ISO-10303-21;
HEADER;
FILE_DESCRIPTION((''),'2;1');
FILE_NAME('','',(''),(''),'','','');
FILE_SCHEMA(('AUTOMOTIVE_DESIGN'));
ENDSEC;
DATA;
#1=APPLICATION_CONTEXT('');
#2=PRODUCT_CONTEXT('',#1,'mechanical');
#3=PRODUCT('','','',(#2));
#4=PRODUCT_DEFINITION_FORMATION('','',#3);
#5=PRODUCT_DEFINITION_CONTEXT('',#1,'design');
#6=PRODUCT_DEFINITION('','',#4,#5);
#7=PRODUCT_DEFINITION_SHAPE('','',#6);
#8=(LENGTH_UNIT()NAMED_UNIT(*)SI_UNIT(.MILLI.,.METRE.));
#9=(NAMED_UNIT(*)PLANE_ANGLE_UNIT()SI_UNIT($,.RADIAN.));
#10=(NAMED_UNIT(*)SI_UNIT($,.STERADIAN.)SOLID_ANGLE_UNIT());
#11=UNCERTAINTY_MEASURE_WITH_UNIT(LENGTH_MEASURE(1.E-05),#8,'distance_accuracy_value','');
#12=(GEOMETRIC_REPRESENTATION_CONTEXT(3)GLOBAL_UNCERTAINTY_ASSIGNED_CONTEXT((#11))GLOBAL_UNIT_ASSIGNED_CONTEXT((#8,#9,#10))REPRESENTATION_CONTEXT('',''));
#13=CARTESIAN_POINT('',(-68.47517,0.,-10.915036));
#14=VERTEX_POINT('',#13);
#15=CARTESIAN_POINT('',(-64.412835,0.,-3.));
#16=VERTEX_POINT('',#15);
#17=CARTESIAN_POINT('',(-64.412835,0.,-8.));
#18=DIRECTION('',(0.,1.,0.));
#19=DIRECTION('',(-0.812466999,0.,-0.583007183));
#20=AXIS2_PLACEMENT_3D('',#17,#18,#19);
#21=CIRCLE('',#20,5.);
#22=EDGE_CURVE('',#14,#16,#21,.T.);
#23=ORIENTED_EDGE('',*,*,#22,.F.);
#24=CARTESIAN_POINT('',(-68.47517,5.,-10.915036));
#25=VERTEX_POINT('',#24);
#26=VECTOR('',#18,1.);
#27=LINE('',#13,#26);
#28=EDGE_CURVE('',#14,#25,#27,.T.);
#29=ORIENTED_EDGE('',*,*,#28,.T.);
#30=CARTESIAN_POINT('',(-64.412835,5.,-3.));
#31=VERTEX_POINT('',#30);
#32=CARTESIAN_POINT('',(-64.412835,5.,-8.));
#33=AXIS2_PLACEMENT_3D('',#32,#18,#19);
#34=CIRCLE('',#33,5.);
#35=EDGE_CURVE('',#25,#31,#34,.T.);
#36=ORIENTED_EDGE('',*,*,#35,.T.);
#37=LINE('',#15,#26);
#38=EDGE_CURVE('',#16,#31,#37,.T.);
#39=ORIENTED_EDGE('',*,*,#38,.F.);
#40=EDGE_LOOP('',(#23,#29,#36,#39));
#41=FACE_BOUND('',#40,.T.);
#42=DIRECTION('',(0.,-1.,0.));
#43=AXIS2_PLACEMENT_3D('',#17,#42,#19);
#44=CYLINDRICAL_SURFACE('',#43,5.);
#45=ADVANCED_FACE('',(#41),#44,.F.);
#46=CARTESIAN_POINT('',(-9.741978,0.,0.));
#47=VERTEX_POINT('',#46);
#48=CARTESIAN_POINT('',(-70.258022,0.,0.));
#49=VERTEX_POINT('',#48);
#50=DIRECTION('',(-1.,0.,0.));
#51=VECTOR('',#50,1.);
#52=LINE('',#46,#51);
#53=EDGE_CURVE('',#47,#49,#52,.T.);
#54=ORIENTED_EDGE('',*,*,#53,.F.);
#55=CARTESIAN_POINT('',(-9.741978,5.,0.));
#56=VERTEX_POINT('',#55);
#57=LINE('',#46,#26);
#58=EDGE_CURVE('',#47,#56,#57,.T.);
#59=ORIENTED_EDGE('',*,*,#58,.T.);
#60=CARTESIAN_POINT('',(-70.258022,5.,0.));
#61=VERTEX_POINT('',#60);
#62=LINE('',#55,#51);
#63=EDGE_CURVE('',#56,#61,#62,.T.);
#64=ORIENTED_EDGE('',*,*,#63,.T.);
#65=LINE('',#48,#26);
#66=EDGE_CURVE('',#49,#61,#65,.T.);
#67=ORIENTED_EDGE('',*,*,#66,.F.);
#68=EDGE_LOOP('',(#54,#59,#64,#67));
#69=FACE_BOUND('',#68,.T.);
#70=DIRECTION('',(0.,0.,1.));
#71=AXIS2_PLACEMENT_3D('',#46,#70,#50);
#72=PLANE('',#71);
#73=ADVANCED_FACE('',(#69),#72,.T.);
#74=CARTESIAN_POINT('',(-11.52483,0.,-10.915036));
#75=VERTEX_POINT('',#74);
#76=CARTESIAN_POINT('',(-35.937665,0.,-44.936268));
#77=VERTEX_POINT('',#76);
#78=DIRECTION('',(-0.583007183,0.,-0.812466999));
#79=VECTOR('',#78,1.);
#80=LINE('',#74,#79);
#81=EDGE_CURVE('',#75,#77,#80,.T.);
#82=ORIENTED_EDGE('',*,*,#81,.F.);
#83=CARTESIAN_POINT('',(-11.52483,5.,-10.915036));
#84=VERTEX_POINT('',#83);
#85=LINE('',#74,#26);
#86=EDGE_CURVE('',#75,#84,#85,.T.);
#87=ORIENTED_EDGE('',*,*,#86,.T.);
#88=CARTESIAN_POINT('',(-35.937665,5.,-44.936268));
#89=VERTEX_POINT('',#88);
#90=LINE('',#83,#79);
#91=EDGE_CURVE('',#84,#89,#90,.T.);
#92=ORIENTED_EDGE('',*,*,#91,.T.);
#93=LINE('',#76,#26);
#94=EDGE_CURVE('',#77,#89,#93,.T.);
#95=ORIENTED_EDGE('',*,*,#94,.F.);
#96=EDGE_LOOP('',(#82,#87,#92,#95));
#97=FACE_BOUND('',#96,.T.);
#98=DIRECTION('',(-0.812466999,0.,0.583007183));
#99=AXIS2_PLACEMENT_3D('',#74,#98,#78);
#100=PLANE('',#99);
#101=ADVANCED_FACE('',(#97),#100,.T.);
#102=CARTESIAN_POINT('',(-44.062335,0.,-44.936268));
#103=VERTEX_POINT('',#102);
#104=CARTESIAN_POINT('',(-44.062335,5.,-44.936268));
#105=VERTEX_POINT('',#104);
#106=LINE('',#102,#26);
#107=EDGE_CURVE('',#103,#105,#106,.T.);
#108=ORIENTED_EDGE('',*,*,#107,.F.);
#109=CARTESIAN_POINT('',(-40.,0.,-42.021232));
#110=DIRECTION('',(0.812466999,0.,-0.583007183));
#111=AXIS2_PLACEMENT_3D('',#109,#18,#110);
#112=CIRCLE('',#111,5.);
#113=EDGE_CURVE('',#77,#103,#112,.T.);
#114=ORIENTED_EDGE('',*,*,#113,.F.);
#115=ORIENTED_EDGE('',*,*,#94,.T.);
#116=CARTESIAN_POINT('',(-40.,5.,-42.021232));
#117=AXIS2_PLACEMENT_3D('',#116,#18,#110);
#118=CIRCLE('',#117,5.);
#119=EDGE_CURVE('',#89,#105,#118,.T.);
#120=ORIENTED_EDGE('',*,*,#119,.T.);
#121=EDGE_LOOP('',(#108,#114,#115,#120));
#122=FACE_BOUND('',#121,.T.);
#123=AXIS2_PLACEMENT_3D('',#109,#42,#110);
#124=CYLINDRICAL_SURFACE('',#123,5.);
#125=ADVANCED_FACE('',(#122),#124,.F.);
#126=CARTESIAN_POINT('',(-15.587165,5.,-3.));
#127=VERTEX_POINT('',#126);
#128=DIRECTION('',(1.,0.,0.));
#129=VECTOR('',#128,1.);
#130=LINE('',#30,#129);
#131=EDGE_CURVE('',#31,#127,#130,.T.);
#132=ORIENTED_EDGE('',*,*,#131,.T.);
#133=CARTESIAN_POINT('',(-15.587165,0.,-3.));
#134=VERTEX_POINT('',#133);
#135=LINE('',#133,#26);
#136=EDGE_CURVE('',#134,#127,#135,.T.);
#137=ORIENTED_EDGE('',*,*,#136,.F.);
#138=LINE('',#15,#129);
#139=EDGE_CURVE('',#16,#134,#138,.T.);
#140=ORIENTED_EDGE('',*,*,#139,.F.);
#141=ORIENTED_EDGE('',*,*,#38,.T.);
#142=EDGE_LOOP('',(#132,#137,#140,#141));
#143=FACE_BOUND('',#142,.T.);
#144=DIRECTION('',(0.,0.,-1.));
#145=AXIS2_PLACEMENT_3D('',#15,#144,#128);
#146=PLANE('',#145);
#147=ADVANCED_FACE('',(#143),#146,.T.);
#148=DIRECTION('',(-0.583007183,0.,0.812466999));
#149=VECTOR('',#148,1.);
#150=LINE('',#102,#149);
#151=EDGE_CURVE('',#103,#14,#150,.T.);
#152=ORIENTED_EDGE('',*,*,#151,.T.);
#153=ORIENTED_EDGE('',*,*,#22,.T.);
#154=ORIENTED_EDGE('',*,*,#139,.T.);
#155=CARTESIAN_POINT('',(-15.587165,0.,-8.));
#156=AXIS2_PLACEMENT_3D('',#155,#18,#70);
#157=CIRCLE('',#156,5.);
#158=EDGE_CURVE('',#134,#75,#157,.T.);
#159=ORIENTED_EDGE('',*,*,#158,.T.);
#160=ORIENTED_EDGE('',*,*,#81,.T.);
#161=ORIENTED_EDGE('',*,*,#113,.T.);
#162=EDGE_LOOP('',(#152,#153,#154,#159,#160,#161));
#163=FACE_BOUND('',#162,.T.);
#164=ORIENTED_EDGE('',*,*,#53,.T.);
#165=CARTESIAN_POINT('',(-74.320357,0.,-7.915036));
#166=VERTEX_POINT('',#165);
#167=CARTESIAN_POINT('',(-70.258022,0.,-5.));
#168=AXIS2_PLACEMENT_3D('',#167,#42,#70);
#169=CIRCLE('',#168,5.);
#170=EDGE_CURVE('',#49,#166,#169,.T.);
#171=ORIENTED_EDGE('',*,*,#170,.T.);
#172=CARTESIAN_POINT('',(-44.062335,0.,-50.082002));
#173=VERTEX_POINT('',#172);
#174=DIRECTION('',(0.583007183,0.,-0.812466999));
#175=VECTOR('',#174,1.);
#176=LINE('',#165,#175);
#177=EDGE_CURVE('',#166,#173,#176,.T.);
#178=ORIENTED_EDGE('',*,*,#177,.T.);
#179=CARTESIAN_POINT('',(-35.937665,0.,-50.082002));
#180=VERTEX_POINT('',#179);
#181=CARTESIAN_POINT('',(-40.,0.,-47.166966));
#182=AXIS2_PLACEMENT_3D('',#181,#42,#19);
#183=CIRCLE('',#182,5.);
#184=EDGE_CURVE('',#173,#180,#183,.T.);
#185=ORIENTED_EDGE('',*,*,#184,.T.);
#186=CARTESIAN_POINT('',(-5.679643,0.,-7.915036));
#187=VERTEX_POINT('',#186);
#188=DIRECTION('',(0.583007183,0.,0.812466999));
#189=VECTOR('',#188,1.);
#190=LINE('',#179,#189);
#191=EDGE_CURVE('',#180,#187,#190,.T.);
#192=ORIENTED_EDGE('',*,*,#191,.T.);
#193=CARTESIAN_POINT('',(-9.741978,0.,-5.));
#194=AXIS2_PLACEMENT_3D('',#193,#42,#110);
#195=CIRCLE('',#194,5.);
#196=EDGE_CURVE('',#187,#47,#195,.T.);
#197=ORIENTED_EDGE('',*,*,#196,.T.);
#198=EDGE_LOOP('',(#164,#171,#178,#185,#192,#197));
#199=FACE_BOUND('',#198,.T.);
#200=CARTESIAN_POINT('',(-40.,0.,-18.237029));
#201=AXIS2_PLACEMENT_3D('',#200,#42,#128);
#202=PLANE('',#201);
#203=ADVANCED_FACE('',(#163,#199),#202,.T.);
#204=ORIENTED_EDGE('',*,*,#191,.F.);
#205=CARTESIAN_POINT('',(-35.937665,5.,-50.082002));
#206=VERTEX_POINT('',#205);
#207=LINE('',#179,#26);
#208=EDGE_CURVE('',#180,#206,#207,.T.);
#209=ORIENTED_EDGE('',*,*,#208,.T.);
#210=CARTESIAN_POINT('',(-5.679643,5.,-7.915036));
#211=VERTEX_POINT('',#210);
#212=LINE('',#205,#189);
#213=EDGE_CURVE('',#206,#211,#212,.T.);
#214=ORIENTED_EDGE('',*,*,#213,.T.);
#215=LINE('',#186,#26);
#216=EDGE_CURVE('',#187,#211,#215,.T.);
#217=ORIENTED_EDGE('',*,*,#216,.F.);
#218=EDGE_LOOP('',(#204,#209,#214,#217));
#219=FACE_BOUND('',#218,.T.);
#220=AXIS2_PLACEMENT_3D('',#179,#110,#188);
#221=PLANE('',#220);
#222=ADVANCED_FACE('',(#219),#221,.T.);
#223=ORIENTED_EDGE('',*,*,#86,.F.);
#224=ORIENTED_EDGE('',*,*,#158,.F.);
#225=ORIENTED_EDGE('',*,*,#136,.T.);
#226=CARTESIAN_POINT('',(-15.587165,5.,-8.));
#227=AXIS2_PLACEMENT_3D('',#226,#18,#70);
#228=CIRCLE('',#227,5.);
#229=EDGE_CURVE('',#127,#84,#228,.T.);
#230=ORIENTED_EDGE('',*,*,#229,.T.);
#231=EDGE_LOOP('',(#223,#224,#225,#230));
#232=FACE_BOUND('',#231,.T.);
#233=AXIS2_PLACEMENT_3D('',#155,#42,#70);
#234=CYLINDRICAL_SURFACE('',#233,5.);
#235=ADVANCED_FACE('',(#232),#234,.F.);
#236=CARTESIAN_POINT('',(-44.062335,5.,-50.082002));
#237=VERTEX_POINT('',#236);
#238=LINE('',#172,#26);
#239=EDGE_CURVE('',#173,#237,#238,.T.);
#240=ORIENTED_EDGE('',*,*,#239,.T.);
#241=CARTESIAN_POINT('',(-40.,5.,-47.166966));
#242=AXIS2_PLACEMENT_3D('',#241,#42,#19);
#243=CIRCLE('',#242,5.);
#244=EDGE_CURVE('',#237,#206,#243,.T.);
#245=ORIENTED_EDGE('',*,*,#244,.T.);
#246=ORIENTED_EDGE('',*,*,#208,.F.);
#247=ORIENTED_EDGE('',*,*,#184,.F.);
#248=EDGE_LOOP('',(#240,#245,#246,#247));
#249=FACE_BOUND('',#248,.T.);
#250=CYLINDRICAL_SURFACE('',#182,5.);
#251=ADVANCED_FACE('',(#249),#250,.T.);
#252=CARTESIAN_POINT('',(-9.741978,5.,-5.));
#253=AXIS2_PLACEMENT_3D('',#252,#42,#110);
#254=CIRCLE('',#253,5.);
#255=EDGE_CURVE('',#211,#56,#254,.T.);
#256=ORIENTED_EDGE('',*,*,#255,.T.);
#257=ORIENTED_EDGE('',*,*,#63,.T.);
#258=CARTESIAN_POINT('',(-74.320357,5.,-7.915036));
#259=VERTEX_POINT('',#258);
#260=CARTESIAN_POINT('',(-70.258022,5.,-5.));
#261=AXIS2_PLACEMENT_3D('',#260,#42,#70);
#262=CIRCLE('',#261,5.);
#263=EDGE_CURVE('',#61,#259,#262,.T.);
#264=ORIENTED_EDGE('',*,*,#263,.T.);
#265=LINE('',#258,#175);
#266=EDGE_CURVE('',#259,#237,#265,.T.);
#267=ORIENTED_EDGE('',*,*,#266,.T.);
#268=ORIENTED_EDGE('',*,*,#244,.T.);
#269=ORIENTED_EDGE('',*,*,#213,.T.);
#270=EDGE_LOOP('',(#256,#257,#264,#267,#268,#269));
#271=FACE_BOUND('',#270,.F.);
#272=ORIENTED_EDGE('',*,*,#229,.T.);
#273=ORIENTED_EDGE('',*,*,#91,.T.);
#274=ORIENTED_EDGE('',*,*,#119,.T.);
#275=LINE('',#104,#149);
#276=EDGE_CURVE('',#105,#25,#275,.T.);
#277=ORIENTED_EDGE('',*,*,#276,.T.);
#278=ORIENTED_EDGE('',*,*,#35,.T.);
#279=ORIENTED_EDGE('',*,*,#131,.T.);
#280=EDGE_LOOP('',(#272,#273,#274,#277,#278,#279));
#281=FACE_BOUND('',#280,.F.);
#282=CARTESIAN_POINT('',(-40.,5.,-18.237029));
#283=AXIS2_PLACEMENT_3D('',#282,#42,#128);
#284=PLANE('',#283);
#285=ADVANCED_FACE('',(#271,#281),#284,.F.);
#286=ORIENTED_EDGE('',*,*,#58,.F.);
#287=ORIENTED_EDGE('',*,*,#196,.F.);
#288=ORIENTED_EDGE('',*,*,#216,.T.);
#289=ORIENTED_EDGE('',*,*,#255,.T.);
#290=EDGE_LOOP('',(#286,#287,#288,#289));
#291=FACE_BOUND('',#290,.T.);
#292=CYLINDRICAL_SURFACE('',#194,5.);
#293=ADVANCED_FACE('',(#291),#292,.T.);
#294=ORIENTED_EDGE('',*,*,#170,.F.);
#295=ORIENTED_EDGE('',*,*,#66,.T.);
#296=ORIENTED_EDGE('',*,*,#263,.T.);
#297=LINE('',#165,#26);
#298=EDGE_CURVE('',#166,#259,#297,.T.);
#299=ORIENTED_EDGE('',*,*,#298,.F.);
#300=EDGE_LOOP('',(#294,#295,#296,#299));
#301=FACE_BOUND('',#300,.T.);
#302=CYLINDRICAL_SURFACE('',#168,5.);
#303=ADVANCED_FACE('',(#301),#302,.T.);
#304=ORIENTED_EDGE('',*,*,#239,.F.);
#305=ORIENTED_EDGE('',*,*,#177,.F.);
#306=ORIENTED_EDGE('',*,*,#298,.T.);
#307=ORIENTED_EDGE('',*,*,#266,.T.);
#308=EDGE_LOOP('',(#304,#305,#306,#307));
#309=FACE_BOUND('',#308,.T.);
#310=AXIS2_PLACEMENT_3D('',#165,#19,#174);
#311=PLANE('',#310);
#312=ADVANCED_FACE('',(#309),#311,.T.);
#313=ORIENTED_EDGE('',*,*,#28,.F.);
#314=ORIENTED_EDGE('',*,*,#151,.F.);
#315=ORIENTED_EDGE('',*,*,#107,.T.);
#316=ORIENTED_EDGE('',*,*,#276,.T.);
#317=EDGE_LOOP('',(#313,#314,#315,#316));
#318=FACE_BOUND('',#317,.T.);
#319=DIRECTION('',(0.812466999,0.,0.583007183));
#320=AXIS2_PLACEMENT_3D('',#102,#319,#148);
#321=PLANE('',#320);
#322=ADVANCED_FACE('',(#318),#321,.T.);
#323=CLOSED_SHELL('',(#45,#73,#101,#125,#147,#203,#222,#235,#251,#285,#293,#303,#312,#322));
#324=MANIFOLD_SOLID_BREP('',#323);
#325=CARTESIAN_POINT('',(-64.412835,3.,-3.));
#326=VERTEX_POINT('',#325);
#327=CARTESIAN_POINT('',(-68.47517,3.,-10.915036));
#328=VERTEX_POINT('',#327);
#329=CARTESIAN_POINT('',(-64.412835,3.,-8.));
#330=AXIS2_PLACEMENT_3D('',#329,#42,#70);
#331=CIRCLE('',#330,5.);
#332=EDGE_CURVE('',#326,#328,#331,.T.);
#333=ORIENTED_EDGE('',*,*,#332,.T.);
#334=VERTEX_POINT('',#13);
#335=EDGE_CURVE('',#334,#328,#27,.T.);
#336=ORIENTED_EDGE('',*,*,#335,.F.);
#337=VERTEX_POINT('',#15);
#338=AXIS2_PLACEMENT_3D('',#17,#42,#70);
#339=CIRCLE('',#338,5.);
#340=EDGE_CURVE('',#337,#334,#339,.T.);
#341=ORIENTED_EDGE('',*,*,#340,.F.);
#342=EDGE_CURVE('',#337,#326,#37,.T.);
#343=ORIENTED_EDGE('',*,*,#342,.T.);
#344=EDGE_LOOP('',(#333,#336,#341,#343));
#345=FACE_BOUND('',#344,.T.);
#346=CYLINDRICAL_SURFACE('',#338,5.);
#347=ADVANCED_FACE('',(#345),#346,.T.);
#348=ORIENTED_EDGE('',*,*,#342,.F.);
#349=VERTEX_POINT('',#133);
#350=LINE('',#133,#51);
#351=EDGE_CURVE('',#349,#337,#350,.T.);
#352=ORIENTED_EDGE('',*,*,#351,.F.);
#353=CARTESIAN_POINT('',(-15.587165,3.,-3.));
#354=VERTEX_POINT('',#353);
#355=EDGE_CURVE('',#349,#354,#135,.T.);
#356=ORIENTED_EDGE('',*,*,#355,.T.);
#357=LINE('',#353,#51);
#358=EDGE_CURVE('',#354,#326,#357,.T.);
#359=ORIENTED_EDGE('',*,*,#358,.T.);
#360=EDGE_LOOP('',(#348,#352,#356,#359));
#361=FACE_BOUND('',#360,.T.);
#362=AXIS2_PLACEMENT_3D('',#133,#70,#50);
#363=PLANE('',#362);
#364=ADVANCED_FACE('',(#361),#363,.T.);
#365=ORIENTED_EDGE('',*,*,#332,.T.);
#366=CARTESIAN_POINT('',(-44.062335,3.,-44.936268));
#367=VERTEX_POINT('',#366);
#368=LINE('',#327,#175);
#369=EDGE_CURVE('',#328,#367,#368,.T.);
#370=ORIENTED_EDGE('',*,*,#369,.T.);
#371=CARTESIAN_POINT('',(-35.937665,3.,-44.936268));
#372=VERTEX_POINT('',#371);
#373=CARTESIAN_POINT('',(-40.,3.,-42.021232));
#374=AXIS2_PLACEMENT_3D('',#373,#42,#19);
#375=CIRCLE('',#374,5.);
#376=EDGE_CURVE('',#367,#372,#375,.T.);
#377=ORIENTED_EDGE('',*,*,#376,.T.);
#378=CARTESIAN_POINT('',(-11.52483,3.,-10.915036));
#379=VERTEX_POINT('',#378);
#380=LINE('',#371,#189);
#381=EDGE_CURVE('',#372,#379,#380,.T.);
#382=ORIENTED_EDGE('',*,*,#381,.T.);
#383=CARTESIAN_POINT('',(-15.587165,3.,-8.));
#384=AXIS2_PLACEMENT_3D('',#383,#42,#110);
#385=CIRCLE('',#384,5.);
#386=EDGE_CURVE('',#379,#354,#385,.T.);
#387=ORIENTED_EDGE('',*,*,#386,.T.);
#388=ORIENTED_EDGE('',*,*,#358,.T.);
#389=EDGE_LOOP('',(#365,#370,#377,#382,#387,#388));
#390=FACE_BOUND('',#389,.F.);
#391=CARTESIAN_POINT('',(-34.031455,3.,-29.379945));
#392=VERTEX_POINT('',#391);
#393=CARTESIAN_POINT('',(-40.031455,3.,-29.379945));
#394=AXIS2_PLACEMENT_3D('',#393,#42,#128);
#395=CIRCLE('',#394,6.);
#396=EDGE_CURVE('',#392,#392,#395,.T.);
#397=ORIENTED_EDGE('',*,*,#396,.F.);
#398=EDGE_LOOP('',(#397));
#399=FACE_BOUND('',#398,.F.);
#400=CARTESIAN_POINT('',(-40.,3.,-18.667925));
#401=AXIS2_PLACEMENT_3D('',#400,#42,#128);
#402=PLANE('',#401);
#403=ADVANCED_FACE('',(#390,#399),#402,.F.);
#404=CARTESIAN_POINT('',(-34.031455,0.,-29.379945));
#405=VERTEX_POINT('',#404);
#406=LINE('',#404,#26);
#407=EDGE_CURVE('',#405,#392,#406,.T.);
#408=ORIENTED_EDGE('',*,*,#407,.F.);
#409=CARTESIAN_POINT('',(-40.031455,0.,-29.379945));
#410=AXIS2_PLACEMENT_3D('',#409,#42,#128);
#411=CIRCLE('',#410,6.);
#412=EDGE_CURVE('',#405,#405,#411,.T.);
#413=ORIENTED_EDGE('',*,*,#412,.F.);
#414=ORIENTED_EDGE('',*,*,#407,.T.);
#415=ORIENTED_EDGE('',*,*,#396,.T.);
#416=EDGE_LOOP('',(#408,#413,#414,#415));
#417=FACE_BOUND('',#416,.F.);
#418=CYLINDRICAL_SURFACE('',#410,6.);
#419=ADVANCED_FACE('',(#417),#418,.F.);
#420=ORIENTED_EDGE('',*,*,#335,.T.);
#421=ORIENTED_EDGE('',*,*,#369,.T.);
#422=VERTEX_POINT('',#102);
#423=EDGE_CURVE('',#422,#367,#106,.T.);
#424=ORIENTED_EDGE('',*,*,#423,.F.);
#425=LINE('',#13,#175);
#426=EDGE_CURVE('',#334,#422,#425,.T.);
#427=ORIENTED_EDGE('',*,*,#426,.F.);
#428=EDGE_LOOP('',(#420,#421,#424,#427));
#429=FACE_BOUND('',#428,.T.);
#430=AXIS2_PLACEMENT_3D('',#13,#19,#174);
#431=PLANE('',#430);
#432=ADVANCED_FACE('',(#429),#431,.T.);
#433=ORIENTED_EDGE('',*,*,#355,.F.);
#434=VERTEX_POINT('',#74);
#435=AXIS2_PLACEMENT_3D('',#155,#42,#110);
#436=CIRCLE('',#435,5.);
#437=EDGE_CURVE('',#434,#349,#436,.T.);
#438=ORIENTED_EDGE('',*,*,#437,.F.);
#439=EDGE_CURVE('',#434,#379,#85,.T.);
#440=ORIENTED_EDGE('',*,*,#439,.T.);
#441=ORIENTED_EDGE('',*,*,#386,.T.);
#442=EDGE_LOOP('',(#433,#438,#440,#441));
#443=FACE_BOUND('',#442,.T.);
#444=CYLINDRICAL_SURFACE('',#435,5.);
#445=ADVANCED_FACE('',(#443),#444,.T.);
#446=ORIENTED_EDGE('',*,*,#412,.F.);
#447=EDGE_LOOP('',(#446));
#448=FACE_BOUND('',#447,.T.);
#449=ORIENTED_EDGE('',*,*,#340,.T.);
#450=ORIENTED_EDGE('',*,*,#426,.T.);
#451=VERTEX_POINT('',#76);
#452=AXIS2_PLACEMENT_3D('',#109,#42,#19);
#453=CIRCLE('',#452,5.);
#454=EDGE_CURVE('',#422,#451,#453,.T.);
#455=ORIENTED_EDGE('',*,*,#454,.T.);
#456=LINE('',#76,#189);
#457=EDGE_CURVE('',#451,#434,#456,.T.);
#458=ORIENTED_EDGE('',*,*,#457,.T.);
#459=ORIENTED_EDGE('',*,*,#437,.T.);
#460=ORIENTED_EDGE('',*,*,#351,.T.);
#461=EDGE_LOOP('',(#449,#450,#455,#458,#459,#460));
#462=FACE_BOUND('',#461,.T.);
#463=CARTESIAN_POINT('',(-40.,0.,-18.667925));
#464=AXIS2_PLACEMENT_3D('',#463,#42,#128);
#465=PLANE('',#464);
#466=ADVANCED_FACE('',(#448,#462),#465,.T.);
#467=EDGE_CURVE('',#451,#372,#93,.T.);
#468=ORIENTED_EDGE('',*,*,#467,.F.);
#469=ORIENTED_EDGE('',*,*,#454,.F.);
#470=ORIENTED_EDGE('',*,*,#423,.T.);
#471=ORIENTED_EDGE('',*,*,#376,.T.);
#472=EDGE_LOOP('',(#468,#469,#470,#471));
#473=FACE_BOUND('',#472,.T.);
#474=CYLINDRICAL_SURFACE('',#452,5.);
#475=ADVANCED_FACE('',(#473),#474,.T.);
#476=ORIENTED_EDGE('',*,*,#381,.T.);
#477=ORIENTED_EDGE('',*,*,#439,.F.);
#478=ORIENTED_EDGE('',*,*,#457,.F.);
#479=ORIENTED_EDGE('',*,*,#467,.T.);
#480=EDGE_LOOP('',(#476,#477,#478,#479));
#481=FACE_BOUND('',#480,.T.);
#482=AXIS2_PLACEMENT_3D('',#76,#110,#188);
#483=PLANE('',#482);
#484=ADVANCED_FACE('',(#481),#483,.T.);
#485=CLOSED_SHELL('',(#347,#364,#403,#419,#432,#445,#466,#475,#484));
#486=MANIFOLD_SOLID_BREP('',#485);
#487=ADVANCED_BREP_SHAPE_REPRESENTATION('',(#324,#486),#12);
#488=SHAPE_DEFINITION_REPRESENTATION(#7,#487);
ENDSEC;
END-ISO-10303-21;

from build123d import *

# Parameters (mm, degrees)
F2_DEPTH = 5
F0_R     = 6
F3_DEPTH = 3


# Not quite as in the source:
# - the program builds the solid bodies; features that only make, move or delete a surface that nothing else refers to are left out


with BuildPart() as f2:
    # F0 (on Front) → F2 (new body)
    with BuildSketch(Plane.XZ):
        with BuildLine():
            ThreePointArc((-5.6796433529, -7.9150359145), (-5.293653969, -2.716929652), (-9.7419783486, 0))
            Line((-9.7419783486, 0), (-70.2580216514, 0))
            ThreePointArc((-70.2580216514, 0), (-74.706346031, -2.716929652), (-74.3203566471, -7.9150359145))
            Line((-74.3203566471, -7.9150359145), (-44.0623349957, -50.0820019003))
            ThreePointArc((-44.0623349957, -50.0820019003), (-40, -52.1669659858), (-35.9376650043, -50.0820019003))
            Line((-35.9376650043, -50.0820019003), (-5.6796433529, -7.9150359145))
        make_face()
        with BuildLine():
            ThreePointArc((-15.5871653577, -3), (-11.1388409781, -5.716929652), (-11.524830362, -10.9150359145))
            Line((-11.524830362, -10.9150359145), (-35.9376650043, -44.9362677002))
            ThreePointArc((-35.9376650043, -44.9362677002), (-40, -47.0212317857), (-44.0623349957, -44.9362677002))
            Line((-44.0623349957, -44.9362677002), (-68.475169638, -10.9150359145))
            ThreePointArc((-68.475169638, -10.9150359145), (-68.8611590219, -5.716929652), (-64.4128346423, -3))
            Line((-64.4128346423, -3), (-15.5871653577, -3))
        make_face(mode=Mode.SUBTRACT)
    extrude(amount=-F2_DEPTH)


with BuildPart() as f3:
    # F0 (on Front) → F3 (new body)
    with BuildSketch(Plane.XZ):
        with BuildLine():
            Line((-35.9376650043, -44.9362677002), (-11.524830362, -10.9150359145))
            ThreePointArc((-11.524830362, -10.9150359145), (-11.1388409781, -5.716929652), (-15.5871653577, -3))
            Line((-15.5871653577, -3), (-64.4128346423, -3))
            ThreePointArc((-64.4128346423, -3), (-68.8611590219, -5.716929652), (-68.475169638, -10.9150359145))
            Line((-68.475169638, -10.9150359145), (-44.0623349957, -44.9362677002))
            ThreePointArc((-44.0623349957, -44.9362677002), (-40, -47.0212317857), (-35.9376650043, -44.9362677002))
        make_face()
        with Locations((-40.0314554572, -29.3799452484)):
            Circle(F0_R, mode=Mode.SUBTRACT)
    extrude(amount=-F3_DEPTH)


solid = Compound([f2.part, f3.part])
